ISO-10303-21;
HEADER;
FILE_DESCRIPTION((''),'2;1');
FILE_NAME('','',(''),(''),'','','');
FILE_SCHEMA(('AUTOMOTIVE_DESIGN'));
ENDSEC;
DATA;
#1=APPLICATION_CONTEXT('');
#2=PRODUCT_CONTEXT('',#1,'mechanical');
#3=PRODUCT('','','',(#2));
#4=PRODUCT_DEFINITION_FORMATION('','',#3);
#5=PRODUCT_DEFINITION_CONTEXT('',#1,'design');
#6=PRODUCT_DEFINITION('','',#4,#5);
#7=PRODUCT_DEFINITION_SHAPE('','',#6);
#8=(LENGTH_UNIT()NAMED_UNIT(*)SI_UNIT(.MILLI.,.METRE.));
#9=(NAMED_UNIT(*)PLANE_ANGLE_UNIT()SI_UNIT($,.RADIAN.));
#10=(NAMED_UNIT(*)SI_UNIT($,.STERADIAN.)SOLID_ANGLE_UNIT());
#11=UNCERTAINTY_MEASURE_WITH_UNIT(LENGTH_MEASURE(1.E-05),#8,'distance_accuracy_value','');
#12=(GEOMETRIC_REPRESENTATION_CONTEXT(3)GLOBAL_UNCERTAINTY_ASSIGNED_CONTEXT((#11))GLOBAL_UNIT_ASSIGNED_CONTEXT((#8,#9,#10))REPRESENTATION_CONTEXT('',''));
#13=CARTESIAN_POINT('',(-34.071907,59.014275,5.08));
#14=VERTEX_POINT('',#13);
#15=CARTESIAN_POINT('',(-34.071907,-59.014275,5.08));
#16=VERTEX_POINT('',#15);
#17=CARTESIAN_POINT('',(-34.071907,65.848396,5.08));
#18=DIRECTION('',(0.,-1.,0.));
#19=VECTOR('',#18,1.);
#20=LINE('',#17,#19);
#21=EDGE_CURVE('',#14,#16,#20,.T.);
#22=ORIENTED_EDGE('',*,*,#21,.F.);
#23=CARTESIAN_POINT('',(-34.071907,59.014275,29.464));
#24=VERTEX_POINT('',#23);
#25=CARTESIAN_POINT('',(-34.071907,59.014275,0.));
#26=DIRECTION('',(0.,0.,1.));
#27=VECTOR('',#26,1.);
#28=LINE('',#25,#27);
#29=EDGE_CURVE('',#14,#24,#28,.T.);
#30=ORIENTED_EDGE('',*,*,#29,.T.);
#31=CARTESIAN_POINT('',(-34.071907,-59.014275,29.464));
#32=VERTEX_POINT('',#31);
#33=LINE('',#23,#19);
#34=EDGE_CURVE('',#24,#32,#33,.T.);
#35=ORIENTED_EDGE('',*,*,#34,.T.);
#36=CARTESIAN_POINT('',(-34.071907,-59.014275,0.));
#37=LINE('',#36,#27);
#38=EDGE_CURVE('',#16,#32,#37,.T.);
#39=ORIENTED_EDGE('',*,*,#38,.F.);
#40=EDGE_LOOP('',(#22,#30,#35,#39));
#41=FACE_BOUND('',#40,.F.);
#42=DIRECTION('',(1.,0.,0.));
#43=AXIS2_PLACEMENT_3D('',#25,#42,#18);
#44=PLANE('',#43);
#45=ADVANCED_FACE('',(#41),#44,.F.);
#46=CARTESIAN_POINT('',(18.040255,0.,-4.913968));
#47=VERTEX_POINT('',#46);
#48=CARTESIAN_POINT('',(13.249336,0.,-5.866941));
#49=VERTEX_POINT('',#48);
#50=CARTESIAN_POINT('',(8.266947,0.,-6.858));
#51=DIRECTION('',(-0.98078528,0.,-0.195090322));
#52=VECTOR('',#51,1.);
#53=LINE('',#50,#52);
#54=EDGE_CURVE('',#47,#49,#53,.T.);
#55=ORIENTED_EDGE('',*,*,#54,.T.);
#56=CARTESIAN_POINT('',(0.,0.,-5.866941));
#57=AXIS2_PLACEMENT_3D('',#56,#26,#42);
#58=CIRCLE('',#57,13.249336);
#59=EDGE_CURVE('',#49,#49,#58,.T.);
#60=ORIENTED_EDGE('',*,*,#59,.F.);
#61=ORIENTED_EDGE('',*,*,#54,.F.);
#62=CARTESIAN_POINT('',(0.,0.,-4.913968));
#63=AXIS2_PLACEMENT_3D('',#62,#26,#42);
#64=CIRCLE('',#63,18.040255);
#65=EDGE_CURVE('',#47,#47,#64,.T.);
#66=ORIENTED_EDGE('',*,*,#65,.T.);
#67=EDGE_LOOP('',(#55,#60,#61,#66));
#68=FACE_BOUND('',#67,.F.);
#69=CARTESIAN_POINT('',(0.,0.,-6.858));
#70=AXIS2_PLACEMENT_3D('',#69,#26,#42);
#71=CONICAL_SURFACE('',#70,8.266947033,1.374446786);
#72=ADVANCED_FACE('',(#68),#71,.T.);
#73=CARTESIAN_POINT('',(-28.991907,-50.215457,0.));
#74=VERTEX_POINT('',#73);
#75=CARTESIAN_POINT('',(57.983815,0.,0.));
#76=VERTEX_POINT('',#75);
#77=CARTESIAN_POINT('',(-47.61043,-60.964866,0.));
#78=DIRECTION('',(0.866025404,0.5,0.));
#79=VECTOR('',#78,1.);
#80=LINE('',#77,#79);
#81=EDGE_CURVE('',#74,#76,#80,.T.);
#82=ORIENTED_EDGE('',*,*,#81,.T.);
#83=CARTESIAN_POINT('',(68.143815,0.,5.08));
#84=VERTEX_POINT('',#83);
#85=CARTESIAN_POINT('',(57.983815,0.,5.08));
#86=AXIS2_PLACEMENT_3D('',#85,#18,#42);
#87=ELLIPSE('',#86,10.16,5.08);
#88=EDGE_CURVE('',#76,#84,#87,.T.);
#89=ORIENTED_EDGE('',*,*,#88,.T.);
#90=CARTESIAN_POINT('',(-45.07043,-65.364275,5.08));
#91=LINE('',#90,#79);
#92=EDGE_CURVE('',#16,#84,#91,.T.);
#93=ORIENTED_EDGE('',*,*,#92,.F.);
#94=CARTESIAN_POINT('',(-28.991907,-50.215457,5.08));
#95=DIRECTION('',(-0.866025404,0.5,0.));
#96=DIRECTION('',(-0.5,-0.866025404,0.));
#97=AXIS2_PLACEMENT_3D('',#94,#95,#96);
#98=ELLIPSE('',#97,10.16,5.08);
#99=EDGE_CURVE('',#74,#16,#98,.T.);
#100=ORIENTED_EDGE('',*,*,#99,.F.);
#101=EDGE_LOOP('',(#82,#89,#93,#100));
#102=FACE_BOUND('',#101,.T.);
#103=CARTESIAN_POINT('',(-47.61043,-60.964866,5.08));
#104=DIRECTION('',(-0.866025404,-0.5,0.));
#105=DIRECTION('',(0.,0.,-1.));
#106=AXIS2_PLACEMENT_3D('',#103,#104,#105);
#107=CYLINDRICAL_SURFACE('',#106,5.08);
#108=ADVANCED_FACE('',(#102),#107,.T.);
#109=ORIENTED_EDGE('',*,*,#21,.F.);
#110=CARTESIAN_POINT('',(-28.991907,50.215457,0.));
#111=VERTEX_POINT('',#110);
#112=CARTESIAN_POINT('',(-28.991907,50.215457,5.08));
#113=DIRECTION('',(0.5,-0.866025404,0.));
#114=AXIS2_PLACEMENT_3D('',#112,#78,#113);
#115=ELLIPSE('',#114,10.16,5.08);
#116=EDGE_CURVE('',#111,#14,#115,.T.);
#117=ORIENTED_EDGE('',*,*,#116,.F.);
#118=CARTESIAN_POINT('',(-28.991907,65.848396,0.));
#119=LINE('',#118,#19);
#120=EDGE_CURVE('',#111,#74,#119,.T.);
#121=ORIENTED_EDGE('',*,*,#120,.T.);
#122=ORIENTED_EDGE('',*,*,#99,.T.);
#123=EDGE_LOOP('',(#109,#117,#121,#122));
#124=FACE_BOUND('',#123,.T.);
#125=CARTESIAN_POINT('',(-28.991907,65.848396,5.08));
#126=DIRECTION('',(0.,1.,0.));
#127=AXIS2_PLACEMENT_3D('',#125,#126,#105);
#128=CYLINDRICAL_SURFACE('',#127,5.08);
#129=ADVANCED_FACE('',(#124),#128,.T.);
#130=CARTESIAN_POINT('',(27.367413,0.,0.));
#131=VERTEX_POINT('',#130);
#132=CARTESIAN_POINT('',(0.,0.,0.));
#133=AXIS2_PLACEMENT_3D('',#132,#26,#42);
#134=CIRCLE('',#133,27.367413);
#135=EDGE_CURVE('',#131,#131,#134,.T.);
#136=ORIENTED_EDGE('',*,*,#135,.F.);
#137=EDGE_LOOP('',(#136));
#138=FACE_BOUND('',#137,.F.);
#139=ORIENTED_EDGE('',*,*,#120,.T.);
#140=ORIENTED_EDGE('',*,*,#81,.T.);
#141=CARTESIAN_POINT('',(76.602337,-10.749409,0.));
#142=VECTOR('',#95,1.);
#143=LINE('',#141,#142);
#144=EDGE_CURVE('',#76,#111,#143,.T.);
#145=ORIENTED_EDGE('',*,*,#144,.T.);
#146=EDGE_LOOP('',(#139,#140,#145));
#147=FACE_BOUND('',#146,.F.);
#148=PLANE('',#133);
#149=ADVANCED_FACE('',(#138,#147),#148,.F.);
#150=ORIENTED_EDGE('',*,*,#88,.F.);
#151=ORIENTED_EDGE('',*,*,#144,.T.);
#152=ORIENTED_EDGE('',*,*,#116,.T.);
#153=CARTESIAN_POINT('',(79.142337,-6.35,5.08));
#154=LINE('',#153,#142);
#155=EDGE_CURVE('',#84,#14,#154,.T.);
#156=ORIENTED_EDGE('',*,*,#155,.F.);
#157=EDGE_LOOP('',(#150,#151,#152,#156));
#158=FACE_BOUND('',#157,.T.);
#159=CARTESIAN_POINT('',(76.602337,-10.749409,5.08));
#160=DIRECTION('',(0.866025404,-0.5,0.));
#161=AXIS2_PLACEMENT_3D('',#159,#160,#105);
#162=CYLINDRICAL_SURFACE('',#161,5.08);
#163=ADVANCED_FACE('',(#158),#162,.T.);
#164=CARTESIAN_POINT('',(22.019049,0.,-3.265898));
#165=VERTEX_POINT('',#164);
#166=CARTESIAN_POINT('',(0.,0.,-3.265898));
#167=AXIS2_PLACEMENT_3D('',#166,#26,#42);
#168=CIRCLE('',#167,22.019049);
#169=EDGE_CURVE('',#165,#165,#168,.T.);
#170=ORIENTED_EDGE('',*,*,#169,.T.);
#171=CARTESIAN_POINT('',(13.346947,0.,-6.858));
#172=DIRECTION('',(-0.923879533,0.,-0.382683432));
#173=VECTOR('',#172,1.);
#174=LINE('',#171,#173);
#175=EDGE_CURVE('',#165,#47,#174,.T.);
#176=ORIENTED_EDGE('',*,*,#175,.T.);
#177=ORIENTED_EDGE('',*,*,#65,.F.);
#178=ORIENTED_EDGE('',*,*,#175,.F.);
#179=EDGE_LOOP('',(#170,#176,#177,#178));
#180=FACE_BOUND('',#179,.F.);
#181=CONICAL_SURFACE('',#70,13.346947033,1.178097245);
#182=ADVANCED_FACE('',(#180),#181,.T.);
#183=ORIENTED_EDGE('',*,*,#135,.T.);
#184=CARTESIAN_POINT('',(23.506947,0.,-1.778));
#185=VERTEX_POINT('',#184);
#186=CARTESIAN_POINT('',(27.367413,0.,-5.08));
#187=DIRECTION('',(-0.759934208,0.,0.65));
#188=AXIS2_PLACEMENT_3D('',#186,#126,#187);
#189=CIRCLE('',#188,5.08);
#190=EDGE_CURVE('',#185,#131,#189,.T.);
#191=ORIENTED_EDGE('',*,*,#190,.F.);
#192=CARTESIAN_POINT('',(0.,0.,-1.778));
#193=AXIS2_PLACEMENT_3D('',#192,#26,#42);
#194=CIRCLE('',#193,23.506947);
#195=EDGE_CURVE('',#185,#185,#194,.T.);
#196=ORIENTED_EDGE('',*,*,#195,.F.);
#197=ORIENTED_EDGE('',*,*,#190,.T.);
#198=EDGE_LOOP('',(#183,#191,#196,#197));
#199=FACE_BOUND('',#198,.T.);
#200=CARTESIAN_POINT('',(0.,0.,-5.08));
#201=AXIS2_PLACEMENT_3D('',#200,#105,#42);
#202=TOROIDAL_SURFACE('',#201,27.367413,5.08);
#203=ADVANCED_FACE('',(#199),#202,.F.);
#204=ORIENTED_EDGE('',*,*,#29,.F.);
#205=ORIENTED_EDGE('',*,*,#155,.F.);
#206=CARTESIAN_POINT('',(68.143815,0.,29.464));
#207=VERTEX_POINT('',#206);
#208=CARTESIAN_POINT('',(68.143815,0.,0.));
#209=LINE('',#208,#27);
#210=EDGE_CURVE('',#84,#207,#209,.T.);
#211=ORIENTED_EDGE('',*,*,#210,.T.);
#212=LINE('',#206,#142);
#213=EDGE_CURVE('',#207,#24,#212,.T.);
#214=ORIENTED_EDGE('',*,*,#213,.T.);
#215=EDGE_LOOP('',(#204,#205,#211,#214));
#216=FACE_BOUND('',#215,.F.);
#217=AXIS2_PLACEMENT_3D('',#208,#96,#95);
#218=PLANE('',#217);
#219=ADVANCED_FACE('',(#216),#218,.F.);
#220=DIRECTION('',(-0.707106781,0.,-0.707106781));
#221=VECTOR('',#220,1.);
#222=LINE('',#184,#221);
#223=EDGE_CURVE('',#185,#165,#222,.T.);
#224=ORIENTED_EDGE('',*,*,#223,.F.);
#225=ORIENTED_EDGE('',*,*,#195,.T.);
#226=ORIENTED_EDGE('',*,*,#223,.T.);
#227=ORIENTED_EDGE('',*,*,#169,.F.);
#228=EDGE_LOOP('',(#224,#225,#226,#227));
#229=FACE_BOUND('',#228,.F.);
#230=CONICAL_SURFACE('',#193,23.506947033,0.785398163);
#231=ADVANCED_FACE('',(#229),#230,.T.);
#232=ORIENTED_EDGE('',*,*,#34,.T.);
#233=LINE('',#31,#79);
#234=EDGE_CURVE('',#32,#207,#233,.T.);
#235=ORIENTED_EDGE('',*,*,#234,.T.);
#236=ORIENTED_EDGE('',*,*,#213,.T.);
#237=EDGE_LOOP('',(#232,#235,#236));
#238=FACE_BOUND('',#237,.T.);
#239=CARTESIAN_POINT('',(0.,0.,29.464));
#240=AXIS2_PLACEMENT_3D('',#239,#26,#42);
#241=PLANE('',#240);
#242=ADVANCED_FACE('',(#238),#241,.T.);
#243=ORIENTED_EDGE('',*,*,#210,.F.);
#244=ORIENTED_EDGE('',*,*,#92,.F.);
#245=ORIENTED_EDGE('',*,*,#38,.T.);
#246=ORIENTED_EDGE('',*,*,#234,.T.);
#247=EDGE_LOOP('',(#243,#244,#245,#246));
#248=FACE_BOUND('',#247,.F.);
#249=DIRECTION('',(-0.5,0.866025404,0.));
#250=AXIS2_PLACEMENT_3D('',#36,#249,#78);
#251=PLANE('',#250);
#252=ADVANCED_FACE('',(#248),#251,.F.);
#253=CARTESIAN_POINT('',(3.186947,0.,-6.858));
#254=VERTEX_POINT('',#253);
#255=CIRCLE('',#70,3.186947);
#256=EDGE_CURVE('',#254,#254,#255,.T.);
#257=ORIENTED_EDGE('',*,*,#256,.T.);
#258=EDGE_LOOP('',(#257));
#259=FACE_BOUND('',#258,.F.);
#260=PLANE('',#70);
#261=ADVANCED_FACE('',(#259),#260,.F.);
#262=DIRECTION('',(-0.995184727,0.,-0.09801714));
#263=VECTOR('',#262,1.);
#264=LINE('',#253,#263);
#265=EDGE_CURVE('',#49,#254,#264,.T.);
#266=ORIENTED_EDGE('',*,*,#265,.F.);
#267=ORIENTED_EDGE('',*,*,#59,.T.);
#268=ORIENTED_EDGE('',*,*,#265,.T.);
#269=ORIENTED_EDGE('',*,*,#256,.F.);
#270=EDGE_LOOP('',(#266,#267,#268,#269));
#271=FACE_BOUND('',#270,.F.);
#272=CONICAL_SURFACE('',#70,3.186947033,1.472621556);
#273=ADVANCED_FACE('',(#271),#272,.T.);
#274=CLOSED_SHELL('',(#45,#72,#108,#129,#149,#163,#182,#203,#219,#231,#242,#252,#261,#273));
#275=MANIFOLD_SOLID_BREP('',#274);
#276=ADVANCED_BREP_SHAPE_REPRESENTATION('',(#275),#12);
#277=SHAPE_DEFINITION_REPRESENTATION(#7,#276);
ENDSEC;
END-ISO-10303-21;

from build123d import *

# Parameters (mm, degrees)
F1_DEPTH    = 29.464
F2_R        = 23.506947033
F3_DEPTH    = 36.322
F4_SIZE     = 5.08
F5_T3_DEPTH = 143.4285494589
F5_T5_DEPTH = 137.562670724
F5_T7_DEPTH = 131.696791989
F6_SIZE     = 5.08
F7_SIZE     = 5.08
F8_SIZE     = 5.08


# Not quite as in the source:
# - a fillet or chamfer that OpenCascade refuses, or shapes differently, is made with other operations: its cross-section is extruded or revolved along the edge and cut away or added


with BuildPart() as f1:
    # F0 (on Top) → F1 (new body)
    with BuildSketch(Plane.XY):
        Polygon((-34.0719074011, 59.0142747295), (-34.0719074011, -59.0142747295), (68.1438148022, 0), align=None)
    extrude(amount=F1_DEPTH)

    # F2 (on face) → F3 (join)
    with BuildSketch(Plane.XY.offset(29.464)):
        Circle(F2_R)
    extrude(amount=-F3_DEPTH)

    # F4
    f4_edges = [f1.edges().sort_by_distance(p)[0] for p in [
        (-23.506947, 0, -6.858),
    ]]
    chamfer(f4_edges, length=F4_SIZE)

    # F5: fillet of radius 5.08 on 4 edges, made by hand

    # F5_s1 → F5_t2 (revolve)
    with BuildSketch(Plane.XZ):
        with BuildLine():
            ThreePointArc((23.506947033, -1.778), (25.2422963406, -0.4658608604), (27.367412808, 0))
            Line((27.367412808, 0), (23.506947033, 0))
            Line((23.506947033, 0), (23.506947033, -1.778))
        make_face()
    revolve(axis=Axis((0, 0, 0), (0, 0, 1)))

    # F5_s4 → F5_t3 (cut)
    with BuildSketch(Plane(origin=(62.1063837297, -35.8571373647, 0), x_dir=(0, 0, 1), z_dir=(-0.8660254038, 0.5, 0))):
        with BuildLine():
            ThreePointArc((0, 28.9919074011), (1.4878975516, 32.5840098495), (5.08, 34.0719074011))
            Line((5.08, 34.0719074011), (0, 34.0719074011))
            Line((0, 34.0719074011), (0, 28.9919074011))
        make_face()
    extrude(amount=F5_T3_DEPTH, mode=Mode.SUBTRACT)

    # F5_s6 → F5_t5 (cut)
    with BuildSketch(Plane(origin=(-62.1063837297, -35.8571373647, 0), x_dir=(0, 0, 1), z_dir=(0.8660254038, 0.5, 0))):
        with BuildLine():
            ThreePointArc((0, 28.9919074011), (1.4878975516, 32.5840098495), (5.08, 34.0719074011))
            Line((5.08, 34.0719074011), (0, 34.0719074011))
            Line((0, 34.0719074011), (0, 28.9919074011))
        make_face()
    extrude(amount=F5_T5_DEPTH, mode=Mode.SUBTRACT)

    # F5_s8 → F5_t7 (cut)
    with BuildSketch(Plane.XZ.offset(-65.8483959945)):
        with BuildLine():
            ThreePointArc((-28.9919074011, 0), (-32.5840098495, 1.4878975516), (-34.0719074011, 5.08))
            Line((-34.0719074011, 5.08), (-34.0719074011, 0))
            Line((-34.0719074011, 0), (-28.9919074011, 0))
        make_face()
    extrude(amount=F5_T7_DEPTH, mode=Mode.SUBTRACT)

    # F6
    f6_edges = [f1.edges().sort_by_distance(p)[0] for p in [
        (-18.426947, 0, -6.858),
    ]]
    chamfer(f6_edges, length=F6_SIZE)

    # F7
    f7_edges = [f1.edges().sort_by_distance(p)[0] for p in [
        (-13.346947, 0, -6.858),
    ]]
    chamfer(f7_edges, length=F7_SIZE)

    # F8
    f8_edges = [f1.edges().sort_by_distance(p)[0] for p in [
        (-8.266947, 0, -6.858),
    ]]
    chamfer(f8_edges, length=F8_SIZE)


solid = f1.part
